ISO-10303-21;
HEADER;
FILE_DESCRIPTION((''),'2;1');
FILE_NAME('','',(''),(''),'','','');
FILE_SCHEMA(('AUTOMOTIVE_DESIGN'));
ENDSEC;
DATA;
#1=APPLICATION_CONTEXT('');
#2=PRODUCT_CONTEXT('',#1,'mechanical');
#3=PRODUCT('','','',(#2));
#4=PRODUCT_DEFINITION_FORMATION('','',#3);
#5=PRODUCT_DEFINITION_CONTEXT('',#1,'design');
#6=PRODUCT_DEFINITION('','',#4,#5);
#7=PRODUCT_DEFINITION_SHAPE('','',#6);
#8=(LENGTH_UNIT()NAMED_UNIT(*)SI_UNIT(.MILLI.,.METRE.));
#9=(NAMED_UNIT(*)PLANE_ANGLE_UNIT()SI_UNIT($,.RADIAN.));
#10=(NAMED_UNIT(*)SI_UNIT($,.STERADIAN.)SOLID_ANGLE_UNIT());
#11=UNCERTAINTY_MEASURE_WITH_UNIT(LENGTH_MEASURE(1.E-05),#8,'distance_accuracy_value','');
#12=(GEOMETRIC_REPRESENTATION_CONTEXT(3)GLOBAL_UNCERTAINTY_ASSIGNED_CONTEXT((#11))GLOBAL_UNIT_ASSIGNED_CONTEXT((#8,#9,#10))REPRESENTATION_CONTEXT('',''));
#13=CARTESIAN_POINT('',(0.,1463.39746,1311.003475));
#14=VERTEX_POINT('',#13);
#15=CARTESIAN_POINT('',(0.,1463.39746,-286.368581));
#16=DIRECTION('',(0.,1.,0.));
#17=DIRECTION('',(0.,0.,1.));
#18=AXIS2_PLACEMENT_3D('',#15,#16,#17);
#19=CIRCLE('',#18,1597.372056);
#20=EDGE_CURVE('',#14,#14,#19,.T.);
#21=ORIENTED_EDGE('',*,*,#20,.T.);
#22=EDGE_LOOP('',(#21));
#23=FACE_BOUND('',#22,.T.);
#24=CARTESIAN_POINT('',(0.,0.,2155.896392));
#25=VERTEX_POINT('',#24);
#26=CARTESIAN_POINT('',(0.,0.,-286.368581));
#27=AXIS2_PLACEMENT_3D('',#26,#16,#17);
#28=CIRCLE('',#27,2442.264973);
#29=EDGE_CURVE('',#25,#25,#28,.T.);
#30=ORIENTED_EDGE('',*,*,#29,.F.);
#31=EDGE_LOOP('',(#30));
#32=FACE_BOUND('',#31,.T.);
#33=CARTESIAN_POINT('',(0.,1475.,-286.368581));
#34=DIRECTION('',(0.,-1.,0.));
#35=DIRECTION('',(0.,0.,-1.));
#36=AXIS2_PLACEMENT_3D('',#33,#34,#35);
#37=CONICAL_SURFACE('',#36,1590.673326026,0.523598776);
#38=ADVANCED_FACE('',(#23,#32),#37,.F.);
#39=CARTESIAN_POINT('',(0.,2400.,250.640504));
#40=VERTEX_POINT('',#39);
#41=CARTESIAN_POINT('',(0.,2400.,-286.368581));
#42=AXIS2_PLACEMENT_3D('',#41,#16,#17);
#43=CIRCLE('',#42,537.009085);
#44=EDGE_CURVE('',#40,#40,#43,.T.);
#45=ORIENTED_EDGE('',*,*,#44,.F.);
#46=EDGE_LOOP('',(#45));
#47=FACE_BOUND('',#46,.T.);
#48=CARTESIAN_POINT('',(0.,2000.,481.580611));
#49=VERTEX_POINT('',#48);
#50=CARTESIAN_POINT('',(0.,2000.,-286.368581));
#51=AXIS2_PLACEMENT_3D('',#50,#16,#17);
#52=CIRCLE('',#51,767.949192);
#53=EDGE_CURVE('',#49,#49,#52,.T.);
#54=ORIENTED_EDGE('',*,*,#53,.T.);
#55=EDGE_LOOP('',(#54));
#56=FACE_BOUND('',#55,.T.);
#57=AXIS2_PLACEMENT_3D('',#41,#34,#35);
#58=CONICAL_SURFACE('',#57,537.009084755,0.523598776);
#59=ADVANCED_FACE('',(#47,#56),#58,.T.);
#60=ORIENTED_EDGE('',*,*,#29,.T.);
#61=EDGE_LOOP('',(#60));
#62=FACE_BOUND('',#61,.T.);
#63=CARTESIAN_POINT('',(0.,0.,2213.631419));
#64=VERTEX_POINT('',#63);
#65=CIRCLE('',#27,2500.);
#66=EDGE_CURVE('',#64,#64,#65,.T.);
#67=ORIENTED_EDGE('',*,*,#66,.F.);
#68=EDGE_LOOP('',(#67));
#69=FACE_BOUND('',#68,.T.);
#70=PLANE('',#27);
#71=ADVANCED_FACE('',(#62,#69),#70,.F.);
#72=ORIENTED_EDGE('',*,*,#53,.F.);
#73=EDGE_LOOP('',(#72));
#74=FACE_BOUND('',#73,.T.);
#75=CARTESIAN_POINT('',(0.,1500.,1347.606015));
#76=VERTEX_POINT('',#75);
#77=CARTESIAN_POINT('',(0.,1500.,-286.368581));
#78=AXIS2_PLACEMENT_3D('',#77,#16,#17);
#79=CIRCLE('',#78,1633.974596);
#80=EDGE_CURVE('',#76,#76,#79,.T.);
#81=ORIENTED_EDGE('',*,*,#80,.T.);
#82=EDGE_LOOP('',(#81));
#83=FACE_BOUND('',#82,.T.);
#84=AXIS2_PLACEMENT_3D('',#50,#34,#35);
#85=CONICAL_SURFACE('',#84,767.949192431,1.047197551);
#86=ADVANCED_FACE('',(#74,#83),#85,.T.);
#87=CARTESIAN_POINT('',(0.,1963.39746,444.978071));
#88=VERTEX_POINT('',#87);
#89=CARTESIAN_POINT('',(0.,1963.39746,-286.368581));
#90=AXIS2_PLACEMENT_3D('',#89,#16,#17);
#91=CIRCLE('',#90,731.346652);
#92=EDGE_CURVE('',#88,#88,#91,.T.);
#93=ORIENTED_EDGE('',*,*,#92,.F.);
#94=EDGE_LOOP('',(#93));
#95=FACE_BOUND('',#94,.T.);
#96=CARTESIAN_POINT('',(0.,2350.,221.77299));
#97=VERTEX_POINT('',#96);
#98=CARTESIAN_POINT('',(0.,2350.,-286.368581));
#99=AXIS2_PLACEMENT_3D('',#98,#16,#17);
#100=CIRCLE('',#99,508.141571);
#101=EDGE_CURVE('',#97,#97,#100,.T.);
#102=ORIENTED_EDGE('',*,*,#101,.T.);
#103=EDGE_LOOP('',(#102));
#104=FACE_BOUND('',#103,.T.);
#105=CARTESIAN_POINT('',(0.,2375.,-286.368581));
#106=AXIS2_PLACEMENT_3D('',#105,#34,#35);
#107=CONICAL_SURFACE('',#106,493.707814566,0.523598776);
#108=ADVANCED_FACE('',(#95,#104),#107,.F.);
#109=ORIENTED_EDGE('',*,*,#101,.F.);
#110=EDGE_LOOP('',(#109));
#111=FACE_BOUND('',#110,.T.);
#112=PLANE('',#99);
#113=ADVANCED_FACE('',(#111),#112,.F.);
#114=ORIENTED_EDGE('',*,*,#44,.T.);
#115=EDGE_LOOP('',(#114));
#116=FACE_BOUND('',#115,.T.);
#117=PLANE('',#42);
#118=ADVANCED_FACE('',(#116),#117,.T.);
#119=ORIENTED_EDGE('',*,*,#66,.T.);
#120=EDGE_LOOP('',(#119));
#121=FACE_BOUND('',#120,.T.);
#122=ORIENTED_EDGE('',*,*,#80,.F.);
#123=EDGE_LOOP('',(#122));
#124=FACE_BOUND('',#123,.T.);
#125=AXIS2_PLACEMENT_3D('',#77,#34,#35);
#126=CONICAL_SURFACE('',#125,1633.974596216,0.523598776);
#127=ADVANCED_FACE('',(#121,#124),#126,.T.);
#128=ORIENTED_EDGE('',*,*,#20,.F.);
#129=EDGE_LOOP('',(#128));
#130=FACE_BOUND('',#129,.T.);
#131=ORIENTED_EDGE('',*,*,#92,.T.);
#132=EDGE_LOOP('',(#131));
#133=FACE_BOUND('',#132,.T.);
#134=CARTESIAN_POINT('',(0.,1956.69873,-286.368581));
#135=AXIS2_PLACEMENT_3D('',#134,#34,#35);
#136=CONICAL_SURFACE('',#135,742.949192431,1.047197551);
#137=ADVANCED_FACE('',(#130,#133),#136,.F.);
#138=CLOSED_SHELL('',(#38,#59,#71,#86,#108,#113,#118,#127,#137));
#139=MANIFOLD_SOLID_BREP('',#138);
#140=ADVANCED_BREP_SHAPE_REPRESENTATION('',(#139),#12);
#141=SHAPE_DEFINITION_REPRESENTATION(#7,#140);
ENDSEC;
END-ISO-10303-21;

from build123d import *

# Parameters (mm, degrees)
SKETCH3_R              = 2500
BACKSHELL_DEPTH        = 1500
CHAMFER1_SIZE2         = 866.025403784
CHAMFER1_SIZE          = 1500
SKETCH7_R              = 1633.974596216
TOP_OF_BACKSHELL_DEPTH = 500
CHAMFER2_SIZE2         = 866.025403784
CHAMFER2_SIZE          = 500
SKETCH9_R              = 767.949192431
HATCH_DEPTH            = 400
CHAMFER3_SIZE2         = 230.940107676
CHAMFER3_SIZE          = 400


# Read off the part's stored shape, not the designer's step: Shell1
with BuildPart() as part:
    # Sketch3 → Backshell (new body)
    with BuildSketch(Plane(origin=(0, 0, 0), x_dir=(1, 0, 0), z_dir=(0, 1, 0))):
        with Locations(Location((0, 286.368581012, 0), (0, 0, 270))):
            Circle(SKETCH3_R)
    extrude(amount=BACKSHELL_DEPTH)

    # Chamfer1
    chamfer1_edges = [part.edges().sort_by_distance(p)[0] for p in [
        (0, 1500, -2786.368581012),
    ]]
    chamfer1_side = [part.faces().sort_by_distance(p)[0] for p in [
        (0, 1482.679491924, -2786.368581012),
    ]]
    chamfer(chamfer1_edges, length=CHAMFER1_SIZE - 0.0001, length2=CHAMFER1_SIZE2 - 0.0001, reference=chamfer1_side[0])  # a hair under: the kernel refuses the full size

    # Sketch7 → Top of Backshell (add)
    with BuildSketch(Plane(origin=(0, 1500, 0), x_dir=(1, 0, 0), z_dir=(0, 1, 0))):
        with Locations(Location((0, 286.368581012, 0), (0, 0, 270))):
            Circle(SKETCH7_R)
    extrude(amount=TOP_OF_BACKSHELL_DEPTH)

    # Chamfer2
    chamfer2_edges = [part.edges().sort_by_distance(p)[0] for p in [
        (0, 2000, -1920.343177228),
    ]]
    chamfer2_side = [part.faces().sort_by_distance(p)[0] for p in [
        (0, 1990, -1920.343177228),
    ]]
    chamfer(chamfer2_edges, length=CHAMFER2_SIZE - 0.0001, length2=CHAMFER2_SIZE2 - 0.0001, reference=chamfer2_side[0])  # a hair under: the kernel refuses the full size

    # Sketch9 → Hatch (add)
    with BuildSketch(Plane(origin=(0, 2000, 0), x_dir=(1, 0, 0), z_dir=(0, 1, 0))):
        with Locations(Location((0, 286.368581012, 0), (0, 0, 270))):
            Circle(SKETCH9_R)
    extrude(amount=HATCH_DEPTH)

    # Chamfer3
    chamfer3_edges = [part.edges().sort_by_distance(p)[0] for p in [
        (0, 2400, -1054.317773444),
    ]]
    chamfer3_side = [part.faces().sort_by_distance(p)[0] for p in [
        (0, 2395.381197846, -1054.317773444),
    ]]
    chamfer(chamfer3_edges, length=CHAMFER3_SIZE - 0.0001, length2=CHAMFER3_SIZE2 - 0.0001, reference=chamfer3_side[0])  # a hair under: the kernel refuses the full size

    # Shell1 outline → Shell1 (revolve, cut)
    with BuildSketch(Plane.XY.offset(-286.368581012)):
        Polygon((2442.264973081, 0), (1597.372055837, 1463.397459622), (731.346652053, 1963.397459622), (508.141571296, 2350), (0, 2350), (0, 0), align=None)
    revolve(axis=Axis((0, 0, -286.368581012), (0, 1, 0)), mode=Mode.SUBTRACT)


solid = part.part
